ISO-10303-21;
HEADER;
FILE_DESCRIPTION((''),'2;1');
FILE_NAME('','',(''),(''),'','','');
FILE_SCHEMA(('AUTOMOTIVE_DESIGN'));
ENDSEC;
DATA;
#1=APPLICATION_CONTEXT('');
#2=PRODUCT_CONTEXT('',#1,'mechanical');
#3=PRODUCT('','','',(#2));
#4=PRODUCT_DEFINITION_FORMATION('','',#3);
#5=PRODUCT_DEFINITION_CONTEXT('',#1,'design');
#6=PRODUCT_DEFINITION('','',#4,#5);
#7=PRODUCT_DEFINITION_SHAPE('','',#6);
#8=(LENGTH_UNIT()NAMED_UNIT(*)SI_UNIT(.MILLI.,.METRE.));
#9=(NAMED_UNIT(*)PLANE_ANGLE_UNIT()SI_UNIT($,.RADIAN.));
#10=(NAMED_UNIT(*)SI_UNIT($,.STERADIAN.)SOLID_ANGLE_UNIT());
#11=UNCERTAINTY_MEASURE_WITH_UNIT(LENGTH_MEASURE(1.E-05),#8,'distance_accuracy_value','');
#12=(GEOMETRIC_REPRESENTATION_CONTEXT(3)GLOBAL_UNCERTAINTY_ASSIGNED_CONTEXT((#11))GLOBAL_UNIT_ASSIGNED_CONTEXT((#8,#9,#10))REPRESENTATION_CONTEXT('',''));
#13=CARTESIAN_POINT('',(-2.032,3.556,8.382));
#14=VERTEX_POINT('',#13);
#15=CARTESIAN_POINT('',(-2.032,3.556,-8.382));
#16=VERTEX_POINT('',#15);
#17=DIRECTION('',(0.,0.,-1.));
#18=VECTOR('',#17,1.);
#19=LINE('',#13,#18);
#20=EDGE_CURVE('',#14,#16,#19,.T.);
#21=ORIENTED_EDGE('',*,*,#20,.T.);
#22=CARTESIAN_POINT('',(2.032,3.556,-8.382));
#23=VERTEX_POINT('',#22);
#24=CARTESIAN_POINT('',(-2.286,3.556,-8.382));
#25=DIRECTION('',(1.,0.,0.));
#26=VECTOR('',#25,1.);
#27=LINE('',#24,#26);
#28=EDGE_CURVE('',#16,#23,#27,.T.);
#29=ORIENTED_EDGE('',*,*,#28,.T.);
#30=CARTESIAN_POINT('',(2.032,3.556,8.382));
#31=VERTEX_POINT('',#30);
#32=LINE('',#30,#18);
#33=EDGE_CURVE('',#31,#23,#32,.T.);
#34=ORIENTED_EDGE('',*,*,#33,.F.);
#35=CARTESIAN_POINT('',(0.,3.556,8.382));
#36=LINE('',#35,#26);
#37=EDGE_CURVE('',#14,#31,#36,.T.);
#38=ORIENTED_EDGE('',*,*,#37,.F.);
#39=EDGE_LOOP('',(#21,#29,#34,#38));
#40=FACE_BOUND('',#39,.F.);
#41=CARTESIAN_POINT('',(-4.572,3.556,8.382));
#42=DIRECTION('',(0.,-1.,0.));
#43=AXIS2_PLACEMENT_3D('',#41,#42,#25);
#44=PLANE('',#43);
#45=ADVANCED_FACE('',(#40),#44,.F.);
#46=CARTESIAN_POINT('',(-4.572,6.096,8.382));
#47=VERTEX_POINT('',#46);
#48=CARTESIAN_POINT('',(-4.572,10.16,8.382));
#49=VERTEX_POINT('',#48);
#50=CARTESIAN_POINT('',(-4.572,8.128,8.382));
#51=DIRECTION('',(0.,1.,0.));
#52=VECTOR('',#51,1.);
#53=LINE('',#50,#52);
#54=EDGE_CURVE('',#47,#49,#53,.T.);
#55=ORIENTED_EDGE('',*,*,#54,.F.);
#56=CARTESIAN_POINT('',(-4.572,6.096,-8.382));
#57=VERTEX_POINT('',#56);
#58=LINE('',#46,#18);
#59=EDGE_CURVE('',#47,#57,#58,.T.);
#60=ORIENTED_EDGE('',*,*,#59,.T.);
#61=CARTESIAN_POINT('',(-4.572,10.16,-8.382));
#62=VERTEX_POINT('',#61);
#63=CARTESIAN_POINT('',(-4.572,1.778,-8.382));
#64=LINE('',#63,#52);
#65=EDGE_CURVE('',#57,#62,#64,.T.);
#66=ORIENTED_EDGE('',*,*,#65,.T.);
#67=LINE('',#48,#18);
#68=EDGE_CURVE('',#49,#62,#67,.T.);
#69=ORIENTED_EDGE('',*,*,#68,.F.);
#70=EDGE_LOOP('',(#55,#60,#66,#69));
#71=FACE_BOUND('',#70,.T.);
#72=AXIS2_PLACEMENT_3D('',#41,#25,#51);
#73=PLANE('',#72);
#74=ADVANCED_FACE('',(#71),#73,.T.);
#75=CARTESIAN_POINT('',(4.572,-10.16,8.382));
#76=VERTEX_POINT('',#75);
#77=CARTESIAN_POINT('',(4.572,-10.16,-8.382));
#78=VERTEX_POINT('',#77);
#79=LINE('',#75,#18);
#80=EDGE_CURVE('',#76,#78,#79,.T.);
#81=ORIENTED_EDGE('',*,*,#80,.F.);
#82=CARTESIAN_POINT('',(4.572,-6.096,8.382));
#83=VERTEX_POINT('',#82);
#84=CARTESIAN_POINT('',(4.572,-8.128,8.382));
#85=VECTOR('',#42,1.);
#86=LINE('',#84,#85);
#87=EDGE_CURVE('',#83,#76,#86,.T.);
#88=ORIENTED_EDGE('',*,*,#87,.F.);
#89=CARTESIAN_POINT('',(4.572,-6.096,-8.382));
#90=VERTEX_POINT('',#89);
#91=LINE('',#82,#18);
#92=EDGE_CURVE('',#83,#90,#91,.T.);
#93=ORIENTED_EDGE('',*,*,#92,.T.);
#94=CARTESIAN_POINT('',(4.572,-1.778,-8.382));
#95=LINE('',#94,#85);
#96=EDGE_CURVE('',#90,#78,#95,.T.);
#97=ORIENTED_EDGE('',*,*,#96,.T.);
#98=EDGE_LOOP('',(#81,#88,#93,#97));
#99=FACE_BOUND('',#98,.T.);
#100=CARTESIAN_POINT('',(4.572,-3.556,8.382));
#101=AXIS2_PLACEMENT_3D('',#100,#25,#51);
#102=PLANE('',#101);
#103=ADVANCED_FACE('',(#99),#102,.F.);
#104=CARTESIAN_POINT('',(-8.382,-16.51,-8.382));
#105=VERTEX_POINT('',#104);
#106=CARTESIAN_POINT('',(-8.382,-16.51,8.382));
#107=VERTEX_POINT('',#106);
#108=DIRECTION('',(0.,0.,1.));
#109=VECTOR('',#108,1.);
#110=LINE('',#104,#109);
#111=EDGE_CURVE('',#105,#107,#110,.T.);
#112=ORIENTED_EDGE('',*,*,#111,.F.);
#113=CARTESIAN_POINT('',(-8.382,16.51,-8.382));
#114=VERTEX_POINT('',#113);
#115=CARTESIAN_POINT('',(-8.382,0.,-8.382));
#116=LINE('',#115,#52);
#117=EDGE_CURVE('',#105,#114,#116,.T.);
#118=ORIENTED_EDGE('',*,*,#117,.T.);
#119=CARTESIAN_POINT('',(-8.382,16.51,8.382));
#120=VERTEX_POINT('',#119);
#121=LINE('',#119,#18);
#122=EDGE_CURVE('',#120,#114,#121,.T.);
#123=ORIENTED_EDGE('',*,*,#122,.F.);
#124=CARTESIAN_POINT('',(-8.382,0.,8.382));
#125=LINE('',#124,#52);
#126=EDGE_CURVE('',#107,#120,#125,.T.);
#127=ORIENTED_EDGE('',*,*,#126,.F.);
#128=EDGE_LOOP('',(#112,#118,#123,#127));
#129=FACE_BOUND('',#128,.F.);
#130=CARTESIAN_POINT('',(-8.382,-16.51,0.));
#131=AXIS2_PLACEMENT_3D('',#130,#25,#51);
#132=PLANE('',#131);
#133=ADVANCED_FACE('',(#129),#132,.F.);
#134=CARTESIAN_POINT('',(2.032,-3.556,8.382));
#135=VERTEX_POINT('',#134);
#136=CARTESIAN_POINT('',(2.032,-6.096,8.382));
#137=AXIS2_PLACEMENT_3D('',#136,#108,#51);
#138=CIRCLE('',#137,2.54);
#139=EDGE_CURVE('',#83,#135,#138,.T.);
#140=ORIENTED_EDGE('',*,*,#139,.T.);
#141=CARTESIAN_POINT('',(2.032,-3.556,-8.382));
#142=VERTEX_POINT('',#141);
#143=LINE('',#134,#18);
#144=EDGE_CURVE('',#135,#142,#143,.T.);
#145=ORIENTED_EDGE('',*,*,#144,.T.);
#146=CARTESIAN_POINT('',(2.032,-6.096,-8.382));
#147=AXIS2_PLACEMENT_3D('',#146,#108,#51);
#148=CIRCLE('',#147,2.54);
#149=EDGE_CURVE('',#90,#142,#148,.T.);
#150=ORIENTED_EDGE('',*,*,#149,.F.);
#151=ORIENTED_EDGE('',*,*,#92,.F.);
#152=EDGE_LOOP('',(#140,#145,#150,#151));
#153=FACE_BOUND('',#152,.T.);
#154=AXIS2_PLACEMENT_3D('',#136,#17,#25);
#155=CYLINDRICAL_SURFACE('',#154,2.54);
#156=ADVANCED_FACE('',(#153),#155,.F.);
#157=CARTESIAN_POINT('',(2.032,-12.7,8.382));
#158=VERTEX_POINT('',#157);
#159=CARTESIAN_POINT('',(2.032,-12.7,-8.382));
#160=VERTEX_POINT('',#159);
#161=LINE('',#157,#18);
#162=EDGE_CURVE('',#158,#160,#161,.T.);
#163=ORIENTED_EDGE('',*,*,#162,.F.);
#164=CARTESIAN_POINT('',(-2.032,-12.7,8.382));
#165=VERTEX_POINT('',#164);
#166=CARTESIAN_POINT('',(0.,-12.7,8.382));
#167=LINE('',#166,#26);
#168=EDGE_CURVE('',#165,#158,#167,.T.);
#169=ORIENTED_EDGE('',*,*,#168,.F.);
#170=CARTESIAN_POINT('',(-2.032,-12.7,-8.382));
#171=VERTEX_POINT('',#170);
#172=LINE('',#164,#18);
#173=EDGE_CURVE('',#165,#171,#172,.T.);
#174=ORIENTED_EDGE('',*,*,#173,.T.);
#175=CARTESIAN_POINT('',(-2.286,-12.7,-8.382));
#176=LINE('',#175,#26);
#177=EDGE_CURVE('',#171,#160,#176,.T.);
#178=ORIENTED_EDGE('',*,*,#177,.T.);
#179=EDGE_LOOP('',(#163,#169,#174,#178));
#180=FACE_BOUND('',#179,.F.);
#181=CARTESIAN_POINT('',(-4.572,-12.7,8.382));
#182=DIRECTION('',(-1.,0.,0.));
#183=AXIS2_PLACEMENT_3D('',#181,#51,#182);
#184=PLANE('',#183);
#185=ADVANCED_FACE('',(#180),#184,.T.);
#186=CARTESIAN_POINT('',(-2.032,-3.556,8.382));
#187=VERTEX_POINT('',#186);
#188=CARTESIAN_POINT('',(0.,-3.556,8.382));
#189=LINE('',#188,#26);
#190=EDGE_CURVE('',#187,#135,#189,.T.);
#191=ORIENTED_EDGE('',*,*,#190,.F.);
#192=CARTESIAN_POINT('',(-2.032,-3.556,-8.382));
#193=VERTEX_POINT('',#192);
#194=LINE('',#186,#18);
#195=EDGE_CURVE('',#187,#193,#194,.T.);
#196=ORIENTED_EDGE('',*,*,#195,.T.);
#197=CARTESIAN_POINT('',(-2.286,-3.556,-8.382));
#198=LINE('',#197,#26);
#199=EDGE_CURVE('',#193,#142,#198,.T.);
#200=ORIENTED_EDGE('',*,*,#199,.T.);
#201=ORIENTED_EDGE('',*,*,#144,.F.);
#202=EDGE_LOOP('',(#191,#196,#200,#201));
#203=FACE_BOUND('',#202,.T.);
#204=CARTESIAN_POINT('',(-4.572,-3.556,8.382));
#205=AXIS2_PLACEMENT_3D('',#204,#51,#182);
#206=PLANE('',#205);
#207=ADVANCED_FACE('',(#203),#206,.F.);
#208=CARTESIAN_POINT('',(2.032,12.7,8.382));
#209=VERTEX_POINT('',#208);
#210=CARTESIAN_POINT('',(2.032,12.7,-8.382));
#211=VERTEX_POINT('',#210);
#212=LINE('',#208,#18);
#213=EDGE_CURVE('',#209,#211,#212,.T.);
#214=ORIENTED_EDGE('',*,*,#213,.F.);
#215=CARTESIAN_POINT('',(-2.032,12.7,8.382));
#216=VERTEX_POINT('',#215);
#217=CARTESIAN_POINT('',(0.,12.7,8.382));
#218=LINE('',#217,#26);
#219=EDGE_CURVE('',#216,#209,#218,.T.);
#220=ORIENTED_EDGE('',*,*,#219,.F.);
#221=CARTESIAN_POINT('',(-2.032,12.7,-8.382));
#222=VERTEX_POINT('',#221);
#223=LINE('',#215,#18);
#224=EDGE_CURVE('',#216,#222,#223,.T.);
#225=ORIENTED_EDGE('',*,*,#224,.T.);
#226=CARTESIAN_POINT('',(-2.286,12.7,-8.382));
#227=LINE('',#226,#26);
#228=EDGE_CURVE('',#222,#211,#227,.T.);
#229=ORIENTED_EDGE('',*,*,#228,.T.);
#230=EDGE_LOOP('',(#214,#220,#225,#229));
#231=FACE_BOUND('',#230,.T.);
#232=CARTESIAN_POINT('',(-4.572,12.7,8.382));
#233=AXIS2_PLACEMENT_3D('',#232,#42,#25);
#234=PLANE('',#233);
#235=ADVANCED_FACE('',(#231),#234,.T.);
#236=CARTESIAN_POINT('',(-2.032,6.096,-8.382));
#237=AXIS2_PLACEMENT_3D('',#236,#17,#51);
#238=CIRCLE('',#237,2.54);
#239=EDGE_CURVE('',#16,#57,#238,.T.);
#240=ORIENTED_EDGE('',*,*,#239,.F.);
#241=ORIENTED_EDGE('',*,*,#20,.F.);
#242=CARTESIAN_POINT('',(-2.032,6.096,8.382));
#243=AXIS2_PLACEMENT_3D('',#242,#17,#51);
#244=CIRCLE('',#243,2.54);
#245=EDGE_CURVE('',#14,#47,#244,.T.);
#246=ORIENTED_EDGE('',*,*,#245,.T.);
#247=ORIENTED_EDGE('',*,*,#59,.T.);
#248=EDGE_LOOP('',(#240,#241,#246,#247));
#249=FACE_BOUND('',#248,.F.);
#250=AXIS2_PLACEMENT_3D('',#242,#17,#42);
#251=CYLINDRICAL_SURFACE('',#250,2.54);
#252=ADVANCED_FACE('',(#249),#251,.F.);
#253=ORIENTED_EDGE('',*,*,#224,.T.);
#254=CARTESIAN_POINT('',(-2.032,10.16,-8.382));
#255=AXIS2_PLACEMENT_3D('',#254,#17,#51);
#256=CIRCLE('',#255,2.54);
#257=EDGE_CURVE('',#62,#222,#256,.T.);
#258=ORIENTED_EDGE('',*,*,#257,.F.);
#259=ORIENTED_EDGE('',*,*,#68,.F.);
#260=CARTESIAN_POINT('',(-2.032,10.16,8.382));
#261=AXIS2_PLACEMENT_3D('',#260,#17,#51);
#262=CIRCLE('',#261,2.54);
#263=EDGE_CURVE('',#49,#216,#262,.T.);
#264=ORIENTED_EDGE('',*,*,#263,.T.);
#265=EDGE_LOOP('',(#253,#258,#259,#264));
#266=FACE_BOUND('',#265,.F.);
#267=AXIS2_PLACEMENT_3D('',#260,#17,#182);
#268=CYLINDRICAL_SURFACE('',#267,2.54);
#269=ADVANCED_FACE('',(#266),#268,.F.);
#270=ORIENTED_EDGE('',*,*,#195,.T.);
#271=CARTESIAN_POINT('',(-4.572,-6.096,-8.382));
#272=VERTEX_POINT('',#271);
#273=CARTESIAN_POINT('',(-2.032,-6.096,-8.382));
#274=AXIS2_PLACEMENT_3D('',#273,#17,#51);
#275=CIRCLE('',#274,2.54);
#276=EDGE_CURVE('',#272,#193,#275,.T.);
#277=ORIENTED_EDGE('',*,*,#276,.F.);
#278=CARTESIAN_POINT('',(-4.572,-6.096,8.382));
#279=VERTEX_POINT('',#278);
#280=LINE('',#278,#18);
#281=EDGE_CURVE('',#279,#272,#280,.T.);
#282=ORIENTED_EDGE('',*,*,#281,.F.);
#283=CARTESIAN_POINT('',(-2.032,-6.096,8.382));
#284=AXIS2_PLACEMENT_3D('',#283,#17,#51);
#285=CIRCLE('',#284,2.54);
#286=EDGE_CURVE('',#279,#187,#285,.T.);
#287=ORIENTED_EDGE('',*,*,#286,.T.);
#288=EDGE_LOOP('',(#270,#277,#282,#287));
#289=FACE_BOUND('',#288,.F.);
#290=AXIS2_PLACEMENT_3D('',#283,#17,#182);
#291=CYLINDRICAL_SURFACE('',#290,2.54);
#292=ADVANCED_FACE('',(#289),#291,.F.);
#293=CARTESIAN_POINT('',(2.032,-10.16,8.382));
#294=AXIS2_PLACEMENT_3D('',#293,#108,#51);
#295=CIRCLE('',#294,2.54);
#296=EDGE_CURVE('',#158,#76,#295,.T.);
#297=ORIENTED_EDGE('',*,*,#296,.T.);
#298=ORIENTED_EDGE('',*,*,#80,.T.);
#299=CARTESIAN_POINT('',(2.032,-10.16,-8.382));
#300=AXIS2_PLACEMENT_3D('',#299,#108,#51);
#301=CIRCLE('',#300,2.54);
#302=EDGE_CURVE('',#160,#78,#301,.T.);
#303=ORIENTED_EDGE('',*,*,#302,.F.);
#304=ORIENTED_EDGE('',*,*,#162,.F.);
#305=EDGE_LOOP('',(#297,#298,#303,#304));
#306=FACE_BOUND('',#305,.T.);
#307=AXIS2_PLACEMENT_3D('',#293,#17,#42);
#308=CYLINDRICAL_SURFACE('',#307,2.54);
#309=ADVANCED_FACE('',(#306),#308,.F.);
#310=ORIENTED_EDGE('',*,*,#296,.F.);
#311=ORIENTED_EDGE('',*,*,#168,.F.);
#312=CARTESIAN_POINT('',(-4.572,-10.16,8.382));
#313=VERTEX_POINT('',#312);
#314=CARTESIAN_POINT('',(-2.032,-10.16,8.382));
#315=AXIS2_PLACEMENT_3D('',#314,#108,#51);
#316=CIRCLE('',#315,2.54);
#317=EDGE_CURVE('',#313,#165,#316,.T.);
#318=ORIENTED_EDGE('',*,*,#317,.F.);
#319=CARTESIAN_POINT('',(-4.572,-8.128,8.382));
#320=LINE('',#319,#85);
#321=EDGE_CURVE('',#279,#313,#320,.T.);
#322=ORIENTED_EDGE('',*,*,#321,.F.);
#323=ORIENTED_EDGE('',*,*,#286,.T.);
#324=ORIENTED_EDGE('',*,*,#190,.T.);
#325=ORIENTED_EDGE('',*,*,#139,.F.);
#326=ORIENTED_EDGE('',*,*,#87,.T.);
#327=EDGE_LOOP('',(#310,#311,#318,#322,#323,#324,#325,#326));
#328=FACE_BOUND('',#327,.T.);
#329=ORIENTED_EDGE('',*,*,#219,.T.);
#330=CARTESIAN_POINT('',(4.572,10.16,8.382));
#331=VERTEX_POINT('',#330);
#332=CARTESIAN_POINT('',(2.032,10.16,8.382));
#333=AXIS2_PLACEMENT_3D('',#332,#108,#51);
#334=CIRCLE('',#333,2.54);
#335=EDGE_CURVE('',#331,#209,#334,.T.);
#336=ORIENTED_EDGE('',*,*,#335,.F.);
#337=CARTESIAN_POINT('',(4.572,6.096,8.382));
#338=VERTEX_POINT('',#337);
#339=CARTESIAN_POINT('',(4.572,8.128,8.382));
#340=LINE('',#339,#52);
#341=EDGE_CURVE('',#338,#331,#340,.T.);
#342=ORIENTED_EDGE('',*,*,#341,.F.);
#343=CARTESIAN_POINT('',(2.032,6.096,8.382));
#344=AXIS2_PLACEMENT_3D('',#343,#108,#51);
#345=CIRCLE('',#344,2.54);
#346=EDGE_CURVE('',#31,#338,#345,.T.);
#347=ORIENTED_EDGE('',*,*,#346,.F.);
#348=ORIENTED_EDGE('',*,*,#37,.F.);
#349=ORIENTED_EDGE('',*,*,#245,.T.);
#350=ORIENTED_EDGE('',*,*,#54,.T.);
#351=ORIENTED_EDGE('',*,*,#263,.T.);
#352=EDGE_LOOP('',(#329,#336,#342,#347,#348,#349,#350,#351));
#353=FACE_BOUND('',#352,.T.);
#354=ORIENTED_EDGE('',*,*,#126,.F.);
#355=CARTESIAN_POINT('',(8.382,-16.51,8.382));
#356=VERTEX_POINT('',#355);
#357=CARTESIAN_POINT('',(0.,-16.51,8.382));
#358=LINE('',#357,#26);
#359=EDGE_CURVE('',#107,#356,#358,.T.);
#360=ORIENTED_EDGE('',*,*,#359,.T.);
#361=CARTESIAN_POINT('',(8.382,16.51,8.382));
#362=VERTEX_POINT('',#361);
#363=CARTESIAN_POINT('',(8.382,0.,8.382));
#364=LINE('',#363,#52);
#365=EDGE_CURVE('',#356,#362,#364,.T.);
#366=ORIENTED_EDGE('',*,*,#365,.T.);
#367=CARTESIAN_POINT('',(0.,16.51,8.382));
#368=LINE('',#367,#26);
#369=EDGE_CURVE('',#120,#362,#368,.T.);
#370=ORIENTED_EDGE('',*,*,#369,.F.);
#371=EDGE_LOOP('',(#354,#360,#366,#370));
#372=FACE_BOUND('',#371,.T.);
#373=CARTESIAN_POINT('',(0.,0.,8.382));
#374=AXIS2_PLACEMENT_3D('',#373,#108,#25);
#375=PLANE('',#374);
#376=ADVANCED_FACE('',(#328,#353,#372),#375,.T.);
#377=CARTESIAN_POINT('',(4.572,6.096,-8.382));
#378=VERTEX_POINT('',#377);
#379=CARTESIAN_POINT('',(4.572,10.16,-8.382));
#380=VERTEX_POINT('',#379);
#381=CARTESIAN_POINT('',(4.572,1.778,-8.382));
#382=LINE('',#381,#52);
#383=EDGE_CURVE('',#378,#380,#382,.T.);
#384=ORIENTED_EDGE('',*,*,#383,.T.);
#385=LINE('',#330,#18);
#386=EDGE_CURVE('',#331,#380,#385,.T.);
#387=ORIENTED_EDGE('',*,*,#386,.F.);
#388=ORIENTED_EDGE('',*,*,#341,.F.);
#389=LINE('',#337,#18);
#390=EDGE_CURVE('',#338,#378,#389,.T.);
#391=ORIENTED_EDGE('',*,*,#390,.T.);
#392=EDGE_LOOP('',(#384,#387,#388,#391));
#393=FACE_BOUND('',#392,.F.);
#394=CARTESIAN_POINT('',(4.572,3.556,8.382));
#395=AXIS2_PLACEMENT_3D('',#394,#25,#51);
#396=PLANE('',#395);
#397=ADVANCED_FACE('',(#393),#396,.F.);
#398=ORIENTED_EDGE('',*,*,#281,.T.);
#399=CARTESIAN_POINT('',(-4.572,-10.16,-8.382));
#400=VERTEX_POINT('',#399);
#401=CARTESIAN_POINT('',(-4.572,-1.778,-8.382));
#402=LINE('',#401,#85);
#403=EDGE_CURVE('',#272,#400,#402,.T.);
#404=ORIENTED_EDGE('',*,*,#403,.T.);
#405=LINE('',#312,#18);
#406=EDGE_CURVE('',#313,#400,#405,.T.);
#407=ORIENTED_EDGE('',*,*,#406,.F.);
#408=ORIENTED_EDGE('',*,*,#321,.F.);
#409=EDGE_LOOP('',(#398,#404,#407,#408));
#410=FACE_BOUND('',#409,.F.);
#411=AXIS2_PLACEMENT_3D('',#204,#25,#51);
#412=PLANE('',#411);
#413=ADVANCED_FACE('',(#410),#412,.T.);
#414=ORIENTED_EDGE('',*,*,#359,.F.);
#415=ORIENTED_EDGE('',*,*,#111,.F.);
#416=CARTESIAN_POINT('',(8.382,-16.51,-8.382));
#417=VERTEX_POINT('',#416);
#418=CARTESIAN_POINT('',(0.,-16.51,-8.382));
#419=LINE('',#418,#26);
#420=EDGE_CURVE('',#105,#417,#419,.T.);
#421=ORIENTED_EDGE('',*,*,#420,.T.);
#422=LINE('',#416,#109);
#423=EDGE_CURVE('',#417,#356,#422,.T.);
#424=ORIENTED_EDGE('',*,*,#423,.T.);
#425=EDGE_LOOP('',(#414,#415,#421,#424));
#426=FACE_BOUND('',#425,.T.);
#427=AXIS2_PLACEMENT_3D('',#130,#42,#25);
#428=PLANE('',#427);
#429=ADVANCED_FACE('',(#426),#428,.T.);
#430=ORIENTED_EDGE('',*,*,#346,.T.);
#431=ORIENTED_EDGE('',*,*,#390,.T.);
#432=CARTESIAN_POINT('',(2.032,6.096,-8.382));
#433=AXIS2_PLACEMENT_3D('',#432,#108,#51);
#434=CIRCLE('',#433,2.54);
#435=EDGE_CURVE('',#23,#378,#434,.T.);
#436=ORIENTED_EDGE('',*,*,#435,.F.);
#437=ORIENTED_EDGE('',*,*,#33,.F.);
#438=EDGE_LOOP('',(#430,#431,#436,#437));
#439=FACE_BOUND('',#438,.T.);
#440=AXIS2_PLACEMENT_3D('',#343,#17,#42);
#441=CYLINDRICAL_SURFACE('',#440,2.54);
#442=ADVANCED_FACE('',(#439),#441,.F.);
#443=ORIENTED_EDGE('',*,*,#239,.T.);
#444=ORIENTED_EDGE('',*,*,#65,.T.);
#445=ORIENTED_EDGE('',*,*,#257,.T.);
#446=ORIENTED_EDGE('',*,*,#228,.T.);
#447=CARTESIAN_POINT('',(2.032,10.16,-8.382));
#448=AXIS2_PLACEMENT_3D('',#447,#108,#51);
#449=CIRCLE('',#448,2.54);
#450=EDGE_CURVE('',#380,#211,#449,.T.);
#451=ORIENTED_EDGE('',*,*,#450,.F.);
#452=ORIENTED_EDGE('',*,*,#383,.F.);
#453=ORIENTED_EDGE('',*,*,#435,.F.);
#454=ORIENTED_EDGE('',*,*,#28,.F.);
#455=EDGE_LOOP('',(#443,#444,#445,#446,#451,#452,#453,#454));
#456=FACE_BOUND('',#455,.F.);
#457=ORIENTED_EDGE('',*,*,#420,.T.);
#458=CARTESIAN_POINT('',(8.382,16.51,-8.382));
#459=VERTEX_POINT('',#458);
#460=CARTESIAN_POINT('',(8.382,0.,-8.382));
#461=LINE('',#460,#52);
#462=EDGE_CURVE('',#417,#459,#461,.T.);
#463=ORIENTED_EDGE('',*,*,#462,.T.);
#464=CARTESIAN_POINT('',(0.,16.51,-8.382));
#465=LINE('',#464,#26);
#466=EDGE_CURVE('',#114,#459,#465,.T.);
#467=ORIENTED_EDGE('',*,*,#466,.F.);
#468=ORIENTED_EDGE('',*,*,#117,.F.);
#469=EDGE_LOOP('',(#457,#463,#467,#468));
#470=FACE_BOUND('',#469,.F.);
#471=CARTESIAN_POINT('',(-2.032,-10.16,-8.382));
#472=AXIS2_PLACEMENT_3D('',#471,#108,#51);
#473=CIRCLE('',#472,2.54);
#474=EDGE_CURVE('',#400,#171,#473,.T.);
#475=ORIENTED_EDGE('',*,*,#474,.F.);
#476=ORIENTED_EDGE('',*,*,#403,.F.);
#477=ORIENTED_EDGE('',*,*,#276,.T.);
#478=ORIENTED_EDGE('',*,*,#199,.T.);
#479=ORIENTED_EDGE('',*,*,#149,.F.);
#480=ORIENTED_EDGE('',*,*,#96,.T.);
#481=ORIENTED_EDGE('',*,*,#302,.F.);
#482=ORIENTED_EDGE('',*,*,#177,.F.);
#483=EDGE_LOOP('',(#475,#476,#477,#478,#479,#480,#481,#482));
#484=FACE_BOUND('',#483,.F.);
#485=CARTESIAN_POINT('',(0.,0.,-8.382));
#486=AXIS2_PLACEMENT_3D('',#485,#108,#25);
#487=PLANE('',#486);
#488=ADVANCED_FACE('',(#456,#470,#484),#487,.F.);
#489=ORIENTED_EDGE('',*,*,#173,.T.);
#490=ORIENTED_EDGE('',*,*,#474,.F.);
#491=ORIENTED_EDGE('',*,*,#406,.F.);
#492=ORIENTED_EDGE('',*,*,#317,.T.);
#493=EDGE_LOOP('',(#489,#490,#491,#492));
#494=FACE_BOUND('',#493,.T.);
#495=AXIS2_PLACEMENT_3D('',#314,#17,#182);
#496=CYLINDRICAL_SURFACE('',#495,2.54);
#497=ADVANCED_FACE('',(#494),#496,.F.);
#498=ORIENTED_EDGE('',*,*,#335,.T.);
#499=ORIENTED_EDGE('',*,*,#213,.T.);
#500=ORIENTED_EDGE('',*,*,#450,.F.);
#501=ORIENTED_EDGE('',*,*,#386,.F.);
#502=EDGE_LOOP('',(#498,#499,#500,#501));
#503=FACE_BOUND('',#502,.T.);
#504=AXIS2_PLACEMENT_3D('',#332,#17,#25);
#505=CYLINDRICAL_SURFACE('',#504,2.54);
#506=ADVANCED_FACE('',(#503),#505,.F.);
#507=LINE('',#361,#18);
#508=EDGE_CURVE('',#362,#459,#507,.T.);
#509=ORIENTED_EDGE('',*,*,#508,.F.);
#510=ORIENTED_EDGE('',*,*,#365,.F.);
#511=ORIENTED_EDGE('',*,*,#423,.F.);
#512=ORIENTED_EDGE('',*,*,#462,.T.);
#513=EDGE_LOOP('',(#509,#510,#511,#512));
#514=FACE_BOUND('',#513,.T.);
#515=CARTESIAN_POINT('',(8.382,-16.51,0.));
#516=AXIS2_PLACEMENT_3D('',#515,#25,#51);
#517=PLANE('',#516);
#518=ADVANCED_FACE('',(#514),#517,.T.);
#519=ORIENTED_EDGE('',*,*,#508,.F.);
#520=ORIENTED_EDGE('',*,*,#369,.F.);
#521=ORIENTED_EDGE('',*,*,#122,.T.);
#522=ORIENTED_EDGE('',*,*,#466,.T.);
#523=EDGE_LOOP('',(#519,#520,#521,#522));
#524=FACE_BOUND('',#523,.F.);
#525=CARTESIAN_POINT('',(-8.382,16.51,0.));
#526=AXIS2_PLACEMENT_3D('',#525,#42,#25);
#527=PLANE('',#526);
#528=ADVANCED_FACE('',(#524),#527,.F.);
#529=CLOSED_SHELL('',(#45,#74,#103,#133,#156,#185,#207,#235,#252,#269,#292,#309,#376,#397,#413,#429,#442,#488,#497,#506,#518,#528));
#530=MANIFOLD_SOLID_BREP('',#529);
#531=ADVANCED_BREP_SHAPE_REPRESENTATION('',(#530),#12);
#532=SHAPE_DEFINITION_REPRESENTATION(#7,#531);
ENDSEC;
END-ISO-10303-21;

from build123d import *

# Parameters (mm, degrees)
F0_W     = 16.764
F0_H     = 33.02
F1_DEPTH = 8.382
F2_W     = 9.144
F2_H     = 9.144
F3_DEPTH = 25.4
F4_R     = 2.54


# Not quite as in the source:
# - two fillets or chamfers of one size are made in one step
# - a pattern or mirror of a feature is missing from the dataset's text; its kind, count and spacing are read off the source's solid


with BuildPart() as f1:
    # F0 (on Top) → F1 (new body, symmetric)
    with BuildSketch(Plane.XY):
        Rectangle(F0_W, F0_H)
    extrude(amount=F1_DEPTH, both=True)

    # F2 (on face) → F3 (cut)
    with BuildSketch(Plane.XY.offset(8.382)):
        with Locations((0, 8.128)):
            Rectangle(F2_W, F2_H)
    f3 = extrude(amount=-F3_DEPTH, mode=Mode.SUBTRACT)

    # F3_copies: F3 across plane
    add(f3.mirror(Plane(origin=(0, 0, 0), x_dir=(0, 0, -1), z_dir=(0, -1, 0))), mode=Mode.SUBTRACT)

    # F4
    f4_edges = [f1.edges().sort_by_distance(p)[0] for p in [
        (-4.572, 12.7, 0),
        (4.572, 12.7, 0),
        (-4.572, 3.556, 0),
        (-4.572, -12.7, 0),
        (4.572, -12.7, 0),
        (4.572, -3.556, 0),
        (-4.572, -3.556, 0),
        (4.572, 3.556, 0),
    ]]
    fillet(f4_edges, radius=F4_R)


solid = f1.part
